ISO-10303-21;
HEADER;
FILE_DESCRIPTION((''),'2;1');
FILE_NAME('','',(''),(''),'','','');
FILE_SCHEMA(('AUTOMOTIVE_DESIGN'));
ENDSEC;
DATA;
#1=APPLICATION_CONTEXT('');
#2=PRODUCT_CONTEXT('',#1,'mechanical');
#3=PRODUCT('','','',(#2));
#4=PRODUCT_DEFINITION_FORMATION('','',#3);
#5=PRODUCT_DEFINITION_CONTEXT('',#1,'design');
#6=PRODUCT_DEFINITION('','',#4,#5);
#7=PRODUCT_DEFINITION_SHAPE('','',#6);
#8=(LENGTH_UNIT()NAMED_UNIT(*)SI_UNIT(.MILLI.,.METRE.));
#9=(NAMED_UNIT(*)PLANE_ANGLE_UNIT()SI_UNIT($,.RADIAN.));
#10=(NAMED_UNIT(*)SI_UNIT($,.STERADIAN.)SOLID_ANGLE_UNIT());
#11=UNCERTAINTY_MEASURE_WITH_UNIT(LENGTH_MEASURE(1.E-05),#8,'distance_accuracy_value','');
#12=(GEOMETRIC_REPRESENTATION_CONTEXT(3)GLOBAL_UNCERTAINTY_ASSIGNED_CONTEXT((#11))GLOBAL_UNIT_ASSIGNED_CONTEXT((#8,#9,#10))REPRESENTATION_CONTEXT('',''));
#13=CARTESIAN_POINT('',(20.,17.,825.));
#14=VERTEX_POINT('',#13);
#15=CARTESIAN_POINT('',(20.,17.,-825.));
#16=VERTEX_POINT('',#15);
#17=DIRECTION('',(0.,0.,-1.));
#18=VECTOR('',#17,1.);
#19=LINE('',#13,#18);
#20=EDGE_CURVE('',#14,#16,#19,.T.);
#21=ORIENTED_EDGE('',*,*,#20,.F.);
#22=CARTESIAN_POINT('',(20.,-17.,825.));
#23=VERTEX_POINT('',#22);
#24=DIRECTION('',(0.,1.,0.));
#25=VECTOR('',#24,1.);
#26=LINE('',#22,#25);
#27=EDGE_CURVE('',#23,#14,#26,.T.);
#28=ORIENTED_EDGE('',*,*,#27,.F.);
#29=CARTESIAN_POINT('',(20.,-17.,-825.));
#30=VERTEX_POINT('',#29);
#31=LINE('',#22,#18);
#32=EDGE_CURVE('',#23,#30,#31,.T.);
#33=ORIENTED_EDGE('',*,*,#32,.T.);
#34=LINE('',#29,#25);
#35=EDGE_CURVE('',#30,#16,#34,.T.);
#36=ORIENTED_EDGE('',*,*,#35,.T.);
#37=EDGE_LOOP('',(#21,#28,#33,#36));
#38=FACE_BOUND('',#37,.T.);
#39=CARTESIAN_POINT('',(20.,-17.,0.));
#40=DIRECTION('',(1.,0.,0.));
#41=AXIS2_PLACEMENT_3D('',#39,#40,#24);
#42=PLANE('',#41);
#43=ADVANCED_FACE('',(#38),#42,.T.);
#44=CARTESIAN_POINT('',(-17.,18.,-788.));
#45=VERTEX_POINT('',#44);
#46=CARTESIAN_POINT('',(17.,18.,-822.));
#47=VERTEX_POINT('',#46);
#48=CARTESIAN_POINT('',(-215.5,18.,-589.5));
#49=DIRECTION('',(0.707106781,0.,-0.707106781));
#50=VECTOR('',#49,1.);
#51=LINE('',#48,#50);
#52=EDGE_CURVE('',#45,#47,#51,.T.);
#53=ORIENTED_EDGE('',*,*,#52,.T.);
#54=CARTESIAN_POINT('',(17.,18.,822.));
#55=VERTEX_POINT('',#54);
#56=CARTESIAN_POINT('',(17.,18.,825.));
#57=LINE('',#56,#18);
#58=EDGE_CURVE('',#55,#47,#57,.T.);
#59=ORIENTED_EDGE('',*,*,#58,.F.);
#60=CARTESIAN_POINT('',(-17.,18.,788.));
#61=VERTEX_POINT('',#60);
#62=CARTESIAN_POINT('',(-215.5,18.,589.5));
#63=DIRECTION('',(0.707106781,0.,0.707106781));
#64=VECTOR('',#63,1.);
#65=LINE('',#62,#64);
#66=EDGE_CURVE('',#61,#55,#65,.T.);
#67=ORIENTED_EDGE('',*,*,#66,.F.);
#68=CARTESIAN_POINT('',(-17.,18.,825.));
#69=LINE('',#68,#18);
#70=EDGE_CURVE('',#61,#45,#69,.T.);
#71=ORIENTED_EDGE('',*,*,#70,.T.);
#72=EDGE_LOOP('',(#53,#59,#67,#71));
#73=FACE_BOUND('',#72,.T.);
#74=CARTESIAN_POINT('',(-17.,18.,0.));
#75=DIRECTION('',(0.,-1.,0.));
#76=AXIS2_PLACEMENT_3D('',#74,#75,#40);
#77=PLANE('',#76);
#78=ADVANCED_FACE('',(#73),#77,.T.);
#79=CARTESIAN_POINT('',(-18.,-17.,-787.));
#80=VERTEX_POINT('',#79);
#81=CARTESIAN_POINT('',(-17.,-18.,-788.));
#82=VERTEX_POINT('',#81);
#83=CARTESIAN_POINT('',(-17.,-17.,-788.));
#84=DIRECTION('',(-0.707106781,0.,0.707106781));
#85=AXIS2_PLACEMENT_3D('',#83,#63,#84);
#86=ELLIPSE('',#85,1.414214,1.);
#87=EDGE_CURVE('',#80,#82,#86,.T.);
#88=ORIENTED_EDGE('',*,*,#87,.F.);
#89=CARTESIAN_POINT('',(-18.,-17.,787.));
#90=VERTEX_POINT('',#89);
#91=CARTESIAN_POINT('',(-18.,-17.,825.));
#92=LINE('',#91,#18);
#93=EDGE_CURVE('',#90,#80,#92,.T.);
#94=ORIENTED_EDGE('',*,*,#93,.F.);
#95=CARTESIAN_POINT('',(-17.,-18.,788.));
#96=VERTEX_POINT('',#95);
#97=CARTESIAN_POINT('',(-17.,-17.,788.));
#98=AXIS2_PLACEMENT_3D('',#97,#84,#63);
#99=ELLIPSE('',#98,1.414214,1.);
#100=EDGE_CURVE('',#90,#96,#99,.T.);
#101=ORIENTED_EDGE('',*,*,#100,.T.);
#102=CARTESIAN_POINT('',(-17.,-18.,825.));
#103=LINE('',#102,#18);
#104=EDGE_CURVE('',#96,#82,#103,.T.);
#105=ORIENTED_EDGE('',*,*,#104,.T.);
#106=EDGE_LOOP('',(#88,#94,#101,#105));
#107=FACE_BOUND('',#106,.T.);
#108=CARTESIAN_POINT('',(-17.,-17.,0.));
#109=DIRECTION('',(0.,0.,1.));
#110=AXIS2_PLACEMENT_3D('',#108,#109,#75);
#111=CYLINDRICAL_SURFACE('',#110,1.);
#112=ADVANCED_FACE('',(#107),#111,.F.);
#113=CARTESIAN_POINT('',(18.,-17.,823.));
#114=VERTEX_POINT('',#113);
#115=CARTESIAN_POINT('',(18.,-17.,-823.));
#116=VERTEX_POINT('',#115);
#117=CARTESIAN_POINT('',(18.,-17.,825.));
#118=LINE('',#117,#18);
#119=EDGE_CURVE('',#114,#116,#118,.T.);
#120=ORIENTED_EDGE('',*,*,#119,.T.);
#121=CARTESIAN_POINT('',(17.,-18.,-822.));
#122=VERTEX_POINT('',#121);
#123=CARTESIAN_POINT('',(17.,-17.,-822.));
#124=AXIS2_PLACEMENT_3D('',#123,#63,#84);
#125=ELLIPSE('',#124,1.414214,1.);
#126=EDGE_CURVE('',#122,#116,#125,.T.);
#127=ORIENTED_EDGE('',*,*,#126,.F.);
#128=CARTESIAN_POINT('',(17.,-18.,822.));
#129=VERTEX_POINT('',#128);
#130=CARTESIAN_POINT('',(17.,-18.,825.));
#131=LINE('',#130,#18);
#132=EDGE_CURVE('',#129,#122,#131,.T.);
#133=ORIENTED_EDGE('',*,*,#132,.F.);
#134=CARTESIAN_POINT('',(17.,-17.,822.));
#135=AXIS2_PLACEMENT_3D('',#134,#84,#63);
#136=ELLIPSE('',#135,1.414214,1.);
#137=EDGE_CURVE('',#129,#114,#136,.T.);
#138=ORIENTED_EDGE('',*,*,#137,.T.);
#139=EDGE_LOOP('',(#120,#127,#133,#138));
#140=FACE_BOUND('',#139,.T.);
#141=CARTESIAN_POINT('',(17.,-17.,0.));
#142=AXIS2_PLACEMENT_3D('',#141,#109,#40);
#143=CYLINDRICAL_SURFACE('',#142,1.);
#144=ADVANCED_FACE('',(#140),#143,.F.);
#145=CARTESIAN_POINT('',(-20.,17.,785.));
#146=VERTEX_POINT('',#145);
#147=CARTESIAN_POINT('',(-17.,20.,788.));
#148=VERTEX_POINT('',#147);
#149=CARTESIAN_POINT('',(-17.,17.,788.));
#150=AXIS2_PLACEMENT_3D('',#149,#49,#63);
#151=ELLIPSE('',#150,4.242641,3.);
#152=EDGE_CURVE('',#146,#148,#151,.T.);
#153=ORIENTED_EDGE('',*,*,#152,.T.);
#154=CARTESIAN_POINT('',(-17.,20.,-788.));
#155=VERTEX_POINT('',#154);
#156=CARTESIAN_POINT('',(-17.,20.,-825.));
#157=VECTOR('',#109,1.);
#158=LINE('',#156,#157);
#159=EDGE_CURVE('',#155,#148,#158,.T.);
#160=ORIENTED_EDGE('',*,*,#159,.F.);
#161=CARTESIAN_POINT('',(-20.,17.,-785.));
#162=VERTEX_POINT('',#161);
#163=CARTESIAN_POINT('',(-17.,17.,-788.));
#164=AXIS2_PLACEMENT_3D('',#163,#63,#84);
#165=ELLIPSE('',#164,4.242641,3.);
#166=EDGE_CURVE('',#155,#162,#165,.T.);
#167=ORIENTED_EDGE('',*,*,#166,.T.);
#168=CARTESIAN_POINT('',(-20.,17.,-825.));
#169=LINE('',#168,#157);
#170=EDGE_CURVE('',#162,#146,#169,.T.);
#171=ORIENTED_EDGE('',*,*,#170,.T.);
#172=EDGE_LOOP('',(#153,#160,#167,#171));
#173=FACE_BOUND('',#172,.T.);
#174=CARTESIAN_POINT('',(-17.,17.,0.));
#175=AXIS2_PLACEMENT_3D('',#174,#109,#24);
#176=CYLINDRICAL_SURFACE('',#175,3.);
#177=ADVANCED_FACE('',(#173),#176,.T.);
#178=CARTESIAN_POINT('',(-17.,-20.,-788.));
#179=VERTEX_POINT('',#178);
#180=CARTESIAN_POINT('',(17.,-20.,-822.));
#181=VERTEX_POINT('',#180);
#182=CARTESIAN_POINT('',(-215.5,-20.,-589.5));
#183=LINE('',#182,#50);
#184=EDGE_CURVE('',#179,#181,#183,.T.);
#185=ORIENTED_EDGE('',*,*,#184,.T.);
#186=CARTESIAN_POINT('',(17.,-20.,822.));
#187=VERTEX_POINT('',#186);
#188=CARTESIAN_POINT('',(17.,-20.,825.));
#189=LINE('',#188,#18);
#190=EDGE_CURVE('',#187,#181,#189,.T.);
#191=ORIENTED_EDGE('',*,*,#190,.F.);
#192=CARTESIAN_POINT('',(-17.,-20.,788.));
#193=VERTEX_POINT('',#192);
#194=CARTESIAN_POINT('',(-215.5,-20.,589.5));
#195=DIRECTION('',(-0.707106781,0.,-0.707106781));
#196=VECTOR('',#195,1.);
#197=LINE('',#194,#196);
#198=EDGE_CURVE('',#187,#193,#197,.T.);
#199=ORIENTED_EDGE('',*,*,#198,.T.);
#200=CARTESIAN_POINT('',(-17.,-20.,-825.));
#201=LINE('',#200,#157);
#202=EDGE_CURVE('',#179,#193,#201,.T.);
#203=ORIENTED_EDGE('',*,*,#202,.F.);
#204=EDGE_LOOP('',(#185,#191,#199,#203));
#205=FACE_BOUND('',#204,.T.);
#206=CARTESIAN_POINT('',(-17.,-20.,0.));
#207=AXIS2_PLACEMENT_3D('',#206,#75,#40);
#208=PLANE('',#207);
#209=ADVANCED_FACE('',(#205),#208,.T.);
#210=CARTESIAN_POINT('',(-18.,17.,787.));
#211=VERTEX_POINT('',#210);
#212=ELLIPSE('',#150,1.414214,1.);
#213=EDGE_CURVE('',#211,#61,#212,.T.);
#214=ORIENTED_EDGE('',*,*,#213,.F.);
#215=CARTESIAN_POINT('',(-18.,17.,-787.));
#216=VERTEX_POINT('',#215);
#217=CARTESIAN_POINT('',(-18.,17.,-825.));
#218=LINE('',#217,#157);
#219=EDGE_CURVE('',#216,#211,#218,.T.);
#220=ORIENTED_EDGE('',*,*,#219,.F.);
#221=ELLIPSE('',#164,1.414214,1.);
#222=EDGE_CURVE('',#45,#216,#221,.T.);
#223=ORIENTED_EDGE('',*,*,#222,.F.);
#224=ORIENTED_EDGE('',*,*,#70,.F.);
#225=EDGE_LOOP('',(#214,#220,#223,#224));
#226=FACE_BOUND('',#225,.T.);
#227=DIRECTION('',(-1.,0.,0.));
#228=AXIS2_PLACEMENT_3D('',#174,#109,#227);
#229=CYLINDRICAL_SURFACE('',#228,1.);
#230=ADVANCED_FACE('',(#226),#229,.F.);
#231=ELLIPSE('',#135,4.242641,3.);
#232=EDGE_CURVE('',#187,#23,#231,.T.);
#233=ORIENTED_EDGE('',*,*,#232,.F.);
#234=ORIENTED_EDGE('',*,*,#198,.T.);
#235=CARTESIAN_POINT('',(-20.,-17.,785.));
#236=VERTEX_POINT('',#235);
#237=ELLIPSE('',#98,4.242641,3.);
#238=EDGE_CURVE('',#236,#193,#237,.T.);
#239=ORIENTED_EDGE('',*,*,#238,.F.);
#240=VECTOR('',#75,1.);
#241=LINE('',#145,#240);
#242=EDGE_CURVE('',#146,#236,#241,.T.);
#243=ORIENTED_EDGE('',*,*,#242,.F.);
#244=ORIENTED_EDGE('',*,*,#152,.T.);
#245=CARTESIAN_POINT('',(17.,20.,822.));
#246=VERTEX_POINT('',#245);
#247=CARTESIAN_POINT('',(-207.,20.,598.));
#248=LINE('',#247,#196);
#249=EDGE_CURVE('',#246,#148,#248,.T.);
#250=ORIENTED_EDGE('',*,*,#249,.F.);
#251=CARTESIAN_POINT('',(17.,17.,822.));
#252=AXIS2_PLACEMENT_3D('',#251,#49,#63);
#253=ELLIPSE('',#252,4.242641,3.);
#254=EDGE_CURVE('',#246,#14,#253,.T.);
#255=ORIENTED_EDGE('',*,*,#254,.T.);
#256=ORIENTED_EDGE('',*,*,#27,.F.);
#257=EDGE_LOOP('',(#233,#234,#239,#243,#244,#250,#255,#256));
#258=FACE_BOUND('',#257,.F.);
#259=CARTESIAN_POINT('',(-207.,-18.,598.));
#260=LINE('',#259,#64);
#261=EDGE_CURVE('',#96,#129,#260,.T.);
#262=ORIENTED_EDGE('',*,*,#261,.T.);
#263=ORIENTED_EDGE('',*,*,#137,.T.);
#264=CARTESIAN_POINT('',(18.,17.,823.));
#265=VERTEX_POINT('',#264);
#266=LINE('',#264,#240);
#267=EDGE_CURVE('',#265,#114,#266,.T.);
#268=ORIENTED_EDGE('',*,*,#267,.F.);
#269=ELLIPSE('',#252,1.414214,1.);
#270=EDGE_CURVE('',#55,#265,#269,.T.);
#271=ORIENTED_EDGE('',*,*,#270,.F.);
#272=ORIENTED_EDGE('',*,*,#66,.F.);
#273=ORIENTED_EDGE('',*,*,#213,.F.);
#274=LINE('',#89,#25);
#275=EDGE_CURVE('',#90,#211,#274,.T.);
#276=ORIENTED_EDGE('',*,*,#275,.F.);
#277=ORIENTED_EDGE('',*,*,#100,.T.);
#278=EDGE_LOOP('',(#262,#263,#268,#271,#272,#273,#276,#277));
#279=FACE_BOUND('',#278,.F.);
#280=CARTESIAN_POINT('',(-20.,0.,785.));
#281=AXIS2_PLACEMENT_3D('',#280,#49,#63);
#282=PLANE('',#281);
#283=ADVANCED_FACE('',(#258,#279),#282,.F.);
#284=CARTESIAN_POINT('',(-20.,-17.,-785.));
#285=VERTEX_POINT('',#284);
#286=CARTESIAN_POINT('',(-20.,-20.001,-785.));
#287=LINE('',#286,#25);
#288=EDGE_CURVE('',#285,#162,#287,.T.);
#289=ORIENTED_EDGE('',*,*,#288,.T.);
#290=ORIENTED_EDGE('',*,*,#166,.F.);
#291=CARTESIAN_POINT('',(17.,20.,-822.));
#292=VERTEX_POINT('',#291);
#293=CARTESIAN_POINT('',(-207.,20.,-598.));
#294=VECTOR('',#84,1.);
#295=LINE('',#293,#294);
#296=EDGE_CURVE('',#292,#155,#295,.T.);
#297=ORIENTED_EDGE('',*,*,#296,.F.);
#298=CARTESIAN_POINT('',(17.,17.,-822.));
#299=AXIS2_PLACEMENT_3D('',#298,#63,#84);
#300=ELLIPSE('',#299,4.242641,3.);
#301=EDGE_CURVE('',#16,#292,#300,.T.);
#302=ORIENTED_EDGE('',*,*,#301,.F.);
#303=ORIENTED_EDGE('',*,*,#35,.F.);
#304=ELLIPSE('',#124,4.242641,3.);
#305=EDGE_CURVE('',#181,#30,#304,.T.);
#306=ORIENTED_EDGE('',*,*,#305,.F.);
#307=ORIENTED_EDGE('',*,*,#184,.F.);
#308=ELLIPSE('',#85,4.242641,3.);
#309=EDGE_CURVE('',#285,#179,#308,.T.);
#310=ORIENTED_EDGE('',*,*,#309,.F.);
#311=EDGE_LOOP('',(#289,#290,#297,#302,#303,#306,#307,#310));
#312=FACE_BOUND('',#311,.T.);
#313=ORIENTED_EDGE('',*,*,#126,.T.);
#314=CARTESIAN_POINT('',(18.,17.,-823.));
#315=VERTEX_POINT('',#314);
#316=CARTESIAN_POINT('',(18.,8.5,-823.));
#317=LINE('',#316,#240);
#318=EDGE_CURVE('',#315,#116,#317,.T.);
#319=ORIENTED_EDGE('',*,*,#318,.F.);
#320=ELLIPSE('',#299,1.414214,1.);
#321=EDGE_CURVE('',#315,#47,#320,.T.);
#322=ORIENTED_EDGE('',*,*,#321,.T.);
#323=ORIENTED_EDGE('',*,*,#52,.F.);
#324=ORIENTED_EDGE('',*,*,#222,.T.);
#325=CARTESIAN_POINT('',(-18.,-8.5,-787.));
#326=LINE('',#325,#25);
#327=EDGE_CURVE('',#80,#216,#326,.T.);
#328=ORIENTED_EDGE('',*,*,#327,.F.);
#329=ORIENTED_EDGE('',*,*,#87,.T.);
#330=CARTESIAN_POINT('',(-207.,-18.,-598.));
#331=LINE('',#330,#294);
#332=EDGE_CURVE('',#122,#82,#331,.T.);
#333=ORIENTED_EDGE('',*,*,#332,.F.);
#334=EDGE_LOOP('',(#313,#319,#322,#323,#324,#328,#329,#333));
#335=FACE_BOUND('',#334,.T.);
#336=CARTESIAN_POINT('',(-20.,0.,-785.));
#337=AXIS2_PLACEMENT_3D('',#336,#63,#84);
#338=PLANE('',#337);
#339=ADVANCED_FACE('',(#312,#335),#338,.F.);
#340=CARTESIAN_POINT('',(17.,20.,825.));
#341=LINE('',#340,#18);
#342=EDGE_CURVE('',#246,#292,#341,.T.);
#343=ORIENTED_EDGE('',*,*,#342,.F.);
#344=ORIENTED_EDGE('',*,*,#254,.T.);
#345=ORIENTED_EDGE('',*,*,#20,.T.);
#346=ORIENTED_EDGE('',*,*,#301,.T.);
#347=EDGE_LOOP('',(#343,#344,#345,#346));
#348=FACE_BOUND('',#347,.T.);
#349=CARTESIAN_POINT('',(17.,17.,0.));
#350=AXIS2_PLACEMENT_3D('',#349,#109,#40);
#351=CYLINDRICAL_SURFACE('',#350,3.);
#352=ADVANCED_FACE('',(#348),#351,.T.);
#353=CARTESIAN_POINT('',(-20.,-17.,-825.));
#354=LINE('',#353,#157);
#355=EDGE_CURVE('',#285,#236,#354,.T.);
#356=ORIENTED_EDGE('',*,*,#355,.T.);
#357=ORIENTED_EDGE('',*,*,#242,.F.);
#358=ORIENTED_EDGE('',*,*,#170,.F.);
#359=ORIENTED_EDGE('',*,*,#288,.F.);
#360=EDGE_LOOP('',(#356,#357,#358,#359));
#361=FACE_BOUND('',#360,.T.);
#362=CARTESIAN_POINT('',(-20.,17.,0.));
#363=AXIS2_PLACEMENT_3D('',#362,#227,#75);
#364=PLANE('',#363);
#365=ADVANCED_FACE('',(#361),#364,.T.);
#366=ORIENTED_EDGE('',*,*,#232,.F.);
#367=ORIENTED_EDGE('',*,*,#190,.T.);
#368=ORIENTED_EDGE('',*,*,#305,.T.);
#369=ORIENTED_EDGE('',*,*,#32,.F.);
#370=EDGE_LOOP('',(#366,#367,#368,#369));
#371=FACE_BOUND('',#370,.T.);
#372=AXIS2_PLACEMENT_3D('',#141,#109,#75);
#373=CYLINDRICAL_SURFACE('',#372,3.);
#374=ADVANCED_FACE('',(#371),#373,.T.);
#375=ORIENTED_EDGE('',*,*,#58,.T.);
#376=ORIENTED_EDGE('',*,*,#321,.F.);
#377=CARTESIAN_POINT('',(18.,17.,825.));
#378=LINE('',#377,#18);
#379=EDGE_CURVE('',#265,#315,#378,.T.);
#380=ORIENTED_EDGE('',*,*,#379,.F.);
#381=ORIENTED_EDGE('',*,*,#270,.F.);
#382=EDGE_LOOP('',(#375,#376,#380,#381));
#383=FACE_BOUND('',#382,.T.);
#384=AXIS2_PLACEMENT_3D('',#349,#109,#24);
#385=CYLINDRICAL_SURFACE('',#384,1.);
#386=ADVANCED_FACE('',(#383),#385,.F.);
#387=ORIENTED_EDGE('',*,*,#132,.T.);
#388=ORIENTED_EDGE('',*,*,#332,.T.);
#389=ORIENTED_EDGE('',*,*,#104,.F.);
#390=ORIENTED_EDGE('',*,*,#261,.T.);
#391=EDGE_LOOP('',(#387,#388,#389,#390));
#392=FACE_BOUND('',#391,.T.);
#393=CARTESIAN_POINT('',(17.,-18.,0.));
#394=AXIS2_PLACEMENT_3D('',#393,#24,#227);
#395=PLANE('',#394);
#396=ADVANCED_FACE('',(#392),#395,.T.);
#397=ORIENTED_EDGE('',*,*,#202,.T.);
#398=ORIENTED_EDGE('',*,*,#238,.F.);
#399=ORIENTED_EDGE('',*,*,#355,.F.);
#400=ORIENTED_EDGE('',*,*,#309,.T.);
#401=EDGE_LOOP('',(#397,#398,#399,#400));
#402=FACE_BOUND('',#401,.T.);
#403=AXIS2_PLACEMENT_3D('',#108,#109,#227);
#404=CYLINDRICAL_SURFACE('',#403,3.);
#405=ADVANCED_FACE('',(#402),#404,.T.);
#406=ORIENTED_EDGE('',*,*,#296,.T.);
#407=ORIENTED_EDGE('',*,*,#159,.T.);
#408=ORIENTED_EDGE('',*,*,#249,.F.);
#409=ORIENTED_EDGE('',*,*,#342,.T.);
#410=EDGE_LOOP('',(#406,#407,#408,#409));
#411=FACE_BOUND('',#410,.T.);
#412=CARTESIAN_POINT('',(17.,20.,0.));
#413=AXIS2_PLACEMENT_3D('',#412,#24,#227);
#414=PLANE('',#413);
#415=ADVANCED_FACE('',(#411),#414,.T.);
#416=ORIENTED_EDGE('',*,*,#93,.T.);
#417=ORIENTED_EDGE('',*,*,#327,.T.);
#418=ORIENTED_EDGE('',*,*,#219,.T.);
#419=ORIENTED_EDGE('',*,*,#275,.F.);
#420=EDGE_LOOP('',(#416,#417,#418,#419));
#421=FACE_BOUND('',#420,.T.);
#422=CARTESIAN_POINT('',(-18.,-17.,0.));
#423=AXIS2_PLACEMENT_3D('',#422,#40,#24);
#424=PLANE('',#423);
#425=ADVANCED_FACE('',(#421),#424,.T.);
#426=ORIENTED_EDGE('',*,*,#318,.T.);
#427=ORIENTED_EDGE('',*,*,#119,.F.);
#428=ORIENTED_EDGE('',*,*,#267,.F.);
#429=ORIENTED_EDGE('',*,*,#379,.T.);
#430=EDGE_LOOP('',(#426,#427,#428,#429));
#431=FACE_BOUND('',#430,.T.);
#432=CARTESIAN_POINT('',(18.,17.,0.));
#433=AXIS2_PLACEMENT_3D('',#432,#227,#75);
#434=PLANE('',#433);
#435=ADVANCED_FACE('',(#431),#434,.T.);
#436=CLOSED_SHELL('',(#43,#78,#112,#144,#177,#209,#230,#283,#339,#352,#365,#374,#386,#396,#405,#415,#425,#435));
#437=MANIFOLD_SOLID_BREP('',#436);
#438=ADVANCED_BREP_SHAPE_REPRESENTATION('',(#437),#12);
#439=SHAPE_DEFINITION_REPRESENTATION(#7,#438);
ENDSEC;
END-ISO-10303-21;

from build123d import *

# Parameters (mm, degrees)
F1_DEPTH      = 825
F3_DEPTH      = 20.001
F3_DEPTH_BACK = 20.001


# Not quite as in the source:
# - a pattern or mirror of a feature is missing from the dataset's text; its kind, count and spacing are read off the source's solid


with BuildPart() as f1:
    # F0 (on Top) → F1 (new body, symmetric)
    with BuildSketch(Plane.XY):
        with BuildLine():
            Line((17, 20), (-17, 20))
            ThreePointArc((-17, 20), (-19.1213203436, 19.1213203436), (-20, 17))
            Line((-20, 17), (-20, -17))
            ThreePointArc((-20, -17), (-19.1213203436, -19.1213203436), (-17, -20))
            Line((-17, -20), (17, -20))
            ThreePointArc((17, -20), (19.1213203436, -19.1213203436), (20, -17))
            Line((20, -17), (20, 17))
            ThreePointArc((20, 17), (19.1213203436, 19.1213203436), (17, 20))
        make_face()
        with BuildLine():
            ThreePointArc((-18, 17), (-17.7071067812, 17.7071067812), (-17, 18))
            Line((-17, 18), (17, 18))
            ThreePointArc((17, 18), (17.7071067812, 17.7071067812), (18, 17))
            Line((18, 17), (18, -17))
            ThreePointArc((18, -17), (17.7071067812, -17.7071067812), (17, -18))
            Line((17, -18), (-17, -18))
            ThreePointArc((-17, -18), (-17.7071067812, -17.7071067812), (-18, -17))
            Line((-18, -17), (-18, 17))
        make_face(mode=Mode.SUBTRACT)
    extrude(amount=F1_DEPTH, both=True)

    # F2 (on Front) → F3 (cut, two sides)
    with BuildSketch(Plane.XZ) as f3_sk:
        Polygon((20, 825), (-20, 825), (-20, 785), align=None)
    f3 = extrude(amount=-F3_DEPTH, mode=Mode.SUBTRACT) + extrude(f3_sk.sketch, amount=F3_DEPTH_BACK, mode=Mode.SUBTRACT)

    # F3_copies: F3 across plane
    add(f3.mirror(Plane(origin=(0, 0, 0), x_dir=(-1, 0, 0), z_dir=(0, 0, -1))), mode=Mode.SUBTRACT)


solid = f1.part
